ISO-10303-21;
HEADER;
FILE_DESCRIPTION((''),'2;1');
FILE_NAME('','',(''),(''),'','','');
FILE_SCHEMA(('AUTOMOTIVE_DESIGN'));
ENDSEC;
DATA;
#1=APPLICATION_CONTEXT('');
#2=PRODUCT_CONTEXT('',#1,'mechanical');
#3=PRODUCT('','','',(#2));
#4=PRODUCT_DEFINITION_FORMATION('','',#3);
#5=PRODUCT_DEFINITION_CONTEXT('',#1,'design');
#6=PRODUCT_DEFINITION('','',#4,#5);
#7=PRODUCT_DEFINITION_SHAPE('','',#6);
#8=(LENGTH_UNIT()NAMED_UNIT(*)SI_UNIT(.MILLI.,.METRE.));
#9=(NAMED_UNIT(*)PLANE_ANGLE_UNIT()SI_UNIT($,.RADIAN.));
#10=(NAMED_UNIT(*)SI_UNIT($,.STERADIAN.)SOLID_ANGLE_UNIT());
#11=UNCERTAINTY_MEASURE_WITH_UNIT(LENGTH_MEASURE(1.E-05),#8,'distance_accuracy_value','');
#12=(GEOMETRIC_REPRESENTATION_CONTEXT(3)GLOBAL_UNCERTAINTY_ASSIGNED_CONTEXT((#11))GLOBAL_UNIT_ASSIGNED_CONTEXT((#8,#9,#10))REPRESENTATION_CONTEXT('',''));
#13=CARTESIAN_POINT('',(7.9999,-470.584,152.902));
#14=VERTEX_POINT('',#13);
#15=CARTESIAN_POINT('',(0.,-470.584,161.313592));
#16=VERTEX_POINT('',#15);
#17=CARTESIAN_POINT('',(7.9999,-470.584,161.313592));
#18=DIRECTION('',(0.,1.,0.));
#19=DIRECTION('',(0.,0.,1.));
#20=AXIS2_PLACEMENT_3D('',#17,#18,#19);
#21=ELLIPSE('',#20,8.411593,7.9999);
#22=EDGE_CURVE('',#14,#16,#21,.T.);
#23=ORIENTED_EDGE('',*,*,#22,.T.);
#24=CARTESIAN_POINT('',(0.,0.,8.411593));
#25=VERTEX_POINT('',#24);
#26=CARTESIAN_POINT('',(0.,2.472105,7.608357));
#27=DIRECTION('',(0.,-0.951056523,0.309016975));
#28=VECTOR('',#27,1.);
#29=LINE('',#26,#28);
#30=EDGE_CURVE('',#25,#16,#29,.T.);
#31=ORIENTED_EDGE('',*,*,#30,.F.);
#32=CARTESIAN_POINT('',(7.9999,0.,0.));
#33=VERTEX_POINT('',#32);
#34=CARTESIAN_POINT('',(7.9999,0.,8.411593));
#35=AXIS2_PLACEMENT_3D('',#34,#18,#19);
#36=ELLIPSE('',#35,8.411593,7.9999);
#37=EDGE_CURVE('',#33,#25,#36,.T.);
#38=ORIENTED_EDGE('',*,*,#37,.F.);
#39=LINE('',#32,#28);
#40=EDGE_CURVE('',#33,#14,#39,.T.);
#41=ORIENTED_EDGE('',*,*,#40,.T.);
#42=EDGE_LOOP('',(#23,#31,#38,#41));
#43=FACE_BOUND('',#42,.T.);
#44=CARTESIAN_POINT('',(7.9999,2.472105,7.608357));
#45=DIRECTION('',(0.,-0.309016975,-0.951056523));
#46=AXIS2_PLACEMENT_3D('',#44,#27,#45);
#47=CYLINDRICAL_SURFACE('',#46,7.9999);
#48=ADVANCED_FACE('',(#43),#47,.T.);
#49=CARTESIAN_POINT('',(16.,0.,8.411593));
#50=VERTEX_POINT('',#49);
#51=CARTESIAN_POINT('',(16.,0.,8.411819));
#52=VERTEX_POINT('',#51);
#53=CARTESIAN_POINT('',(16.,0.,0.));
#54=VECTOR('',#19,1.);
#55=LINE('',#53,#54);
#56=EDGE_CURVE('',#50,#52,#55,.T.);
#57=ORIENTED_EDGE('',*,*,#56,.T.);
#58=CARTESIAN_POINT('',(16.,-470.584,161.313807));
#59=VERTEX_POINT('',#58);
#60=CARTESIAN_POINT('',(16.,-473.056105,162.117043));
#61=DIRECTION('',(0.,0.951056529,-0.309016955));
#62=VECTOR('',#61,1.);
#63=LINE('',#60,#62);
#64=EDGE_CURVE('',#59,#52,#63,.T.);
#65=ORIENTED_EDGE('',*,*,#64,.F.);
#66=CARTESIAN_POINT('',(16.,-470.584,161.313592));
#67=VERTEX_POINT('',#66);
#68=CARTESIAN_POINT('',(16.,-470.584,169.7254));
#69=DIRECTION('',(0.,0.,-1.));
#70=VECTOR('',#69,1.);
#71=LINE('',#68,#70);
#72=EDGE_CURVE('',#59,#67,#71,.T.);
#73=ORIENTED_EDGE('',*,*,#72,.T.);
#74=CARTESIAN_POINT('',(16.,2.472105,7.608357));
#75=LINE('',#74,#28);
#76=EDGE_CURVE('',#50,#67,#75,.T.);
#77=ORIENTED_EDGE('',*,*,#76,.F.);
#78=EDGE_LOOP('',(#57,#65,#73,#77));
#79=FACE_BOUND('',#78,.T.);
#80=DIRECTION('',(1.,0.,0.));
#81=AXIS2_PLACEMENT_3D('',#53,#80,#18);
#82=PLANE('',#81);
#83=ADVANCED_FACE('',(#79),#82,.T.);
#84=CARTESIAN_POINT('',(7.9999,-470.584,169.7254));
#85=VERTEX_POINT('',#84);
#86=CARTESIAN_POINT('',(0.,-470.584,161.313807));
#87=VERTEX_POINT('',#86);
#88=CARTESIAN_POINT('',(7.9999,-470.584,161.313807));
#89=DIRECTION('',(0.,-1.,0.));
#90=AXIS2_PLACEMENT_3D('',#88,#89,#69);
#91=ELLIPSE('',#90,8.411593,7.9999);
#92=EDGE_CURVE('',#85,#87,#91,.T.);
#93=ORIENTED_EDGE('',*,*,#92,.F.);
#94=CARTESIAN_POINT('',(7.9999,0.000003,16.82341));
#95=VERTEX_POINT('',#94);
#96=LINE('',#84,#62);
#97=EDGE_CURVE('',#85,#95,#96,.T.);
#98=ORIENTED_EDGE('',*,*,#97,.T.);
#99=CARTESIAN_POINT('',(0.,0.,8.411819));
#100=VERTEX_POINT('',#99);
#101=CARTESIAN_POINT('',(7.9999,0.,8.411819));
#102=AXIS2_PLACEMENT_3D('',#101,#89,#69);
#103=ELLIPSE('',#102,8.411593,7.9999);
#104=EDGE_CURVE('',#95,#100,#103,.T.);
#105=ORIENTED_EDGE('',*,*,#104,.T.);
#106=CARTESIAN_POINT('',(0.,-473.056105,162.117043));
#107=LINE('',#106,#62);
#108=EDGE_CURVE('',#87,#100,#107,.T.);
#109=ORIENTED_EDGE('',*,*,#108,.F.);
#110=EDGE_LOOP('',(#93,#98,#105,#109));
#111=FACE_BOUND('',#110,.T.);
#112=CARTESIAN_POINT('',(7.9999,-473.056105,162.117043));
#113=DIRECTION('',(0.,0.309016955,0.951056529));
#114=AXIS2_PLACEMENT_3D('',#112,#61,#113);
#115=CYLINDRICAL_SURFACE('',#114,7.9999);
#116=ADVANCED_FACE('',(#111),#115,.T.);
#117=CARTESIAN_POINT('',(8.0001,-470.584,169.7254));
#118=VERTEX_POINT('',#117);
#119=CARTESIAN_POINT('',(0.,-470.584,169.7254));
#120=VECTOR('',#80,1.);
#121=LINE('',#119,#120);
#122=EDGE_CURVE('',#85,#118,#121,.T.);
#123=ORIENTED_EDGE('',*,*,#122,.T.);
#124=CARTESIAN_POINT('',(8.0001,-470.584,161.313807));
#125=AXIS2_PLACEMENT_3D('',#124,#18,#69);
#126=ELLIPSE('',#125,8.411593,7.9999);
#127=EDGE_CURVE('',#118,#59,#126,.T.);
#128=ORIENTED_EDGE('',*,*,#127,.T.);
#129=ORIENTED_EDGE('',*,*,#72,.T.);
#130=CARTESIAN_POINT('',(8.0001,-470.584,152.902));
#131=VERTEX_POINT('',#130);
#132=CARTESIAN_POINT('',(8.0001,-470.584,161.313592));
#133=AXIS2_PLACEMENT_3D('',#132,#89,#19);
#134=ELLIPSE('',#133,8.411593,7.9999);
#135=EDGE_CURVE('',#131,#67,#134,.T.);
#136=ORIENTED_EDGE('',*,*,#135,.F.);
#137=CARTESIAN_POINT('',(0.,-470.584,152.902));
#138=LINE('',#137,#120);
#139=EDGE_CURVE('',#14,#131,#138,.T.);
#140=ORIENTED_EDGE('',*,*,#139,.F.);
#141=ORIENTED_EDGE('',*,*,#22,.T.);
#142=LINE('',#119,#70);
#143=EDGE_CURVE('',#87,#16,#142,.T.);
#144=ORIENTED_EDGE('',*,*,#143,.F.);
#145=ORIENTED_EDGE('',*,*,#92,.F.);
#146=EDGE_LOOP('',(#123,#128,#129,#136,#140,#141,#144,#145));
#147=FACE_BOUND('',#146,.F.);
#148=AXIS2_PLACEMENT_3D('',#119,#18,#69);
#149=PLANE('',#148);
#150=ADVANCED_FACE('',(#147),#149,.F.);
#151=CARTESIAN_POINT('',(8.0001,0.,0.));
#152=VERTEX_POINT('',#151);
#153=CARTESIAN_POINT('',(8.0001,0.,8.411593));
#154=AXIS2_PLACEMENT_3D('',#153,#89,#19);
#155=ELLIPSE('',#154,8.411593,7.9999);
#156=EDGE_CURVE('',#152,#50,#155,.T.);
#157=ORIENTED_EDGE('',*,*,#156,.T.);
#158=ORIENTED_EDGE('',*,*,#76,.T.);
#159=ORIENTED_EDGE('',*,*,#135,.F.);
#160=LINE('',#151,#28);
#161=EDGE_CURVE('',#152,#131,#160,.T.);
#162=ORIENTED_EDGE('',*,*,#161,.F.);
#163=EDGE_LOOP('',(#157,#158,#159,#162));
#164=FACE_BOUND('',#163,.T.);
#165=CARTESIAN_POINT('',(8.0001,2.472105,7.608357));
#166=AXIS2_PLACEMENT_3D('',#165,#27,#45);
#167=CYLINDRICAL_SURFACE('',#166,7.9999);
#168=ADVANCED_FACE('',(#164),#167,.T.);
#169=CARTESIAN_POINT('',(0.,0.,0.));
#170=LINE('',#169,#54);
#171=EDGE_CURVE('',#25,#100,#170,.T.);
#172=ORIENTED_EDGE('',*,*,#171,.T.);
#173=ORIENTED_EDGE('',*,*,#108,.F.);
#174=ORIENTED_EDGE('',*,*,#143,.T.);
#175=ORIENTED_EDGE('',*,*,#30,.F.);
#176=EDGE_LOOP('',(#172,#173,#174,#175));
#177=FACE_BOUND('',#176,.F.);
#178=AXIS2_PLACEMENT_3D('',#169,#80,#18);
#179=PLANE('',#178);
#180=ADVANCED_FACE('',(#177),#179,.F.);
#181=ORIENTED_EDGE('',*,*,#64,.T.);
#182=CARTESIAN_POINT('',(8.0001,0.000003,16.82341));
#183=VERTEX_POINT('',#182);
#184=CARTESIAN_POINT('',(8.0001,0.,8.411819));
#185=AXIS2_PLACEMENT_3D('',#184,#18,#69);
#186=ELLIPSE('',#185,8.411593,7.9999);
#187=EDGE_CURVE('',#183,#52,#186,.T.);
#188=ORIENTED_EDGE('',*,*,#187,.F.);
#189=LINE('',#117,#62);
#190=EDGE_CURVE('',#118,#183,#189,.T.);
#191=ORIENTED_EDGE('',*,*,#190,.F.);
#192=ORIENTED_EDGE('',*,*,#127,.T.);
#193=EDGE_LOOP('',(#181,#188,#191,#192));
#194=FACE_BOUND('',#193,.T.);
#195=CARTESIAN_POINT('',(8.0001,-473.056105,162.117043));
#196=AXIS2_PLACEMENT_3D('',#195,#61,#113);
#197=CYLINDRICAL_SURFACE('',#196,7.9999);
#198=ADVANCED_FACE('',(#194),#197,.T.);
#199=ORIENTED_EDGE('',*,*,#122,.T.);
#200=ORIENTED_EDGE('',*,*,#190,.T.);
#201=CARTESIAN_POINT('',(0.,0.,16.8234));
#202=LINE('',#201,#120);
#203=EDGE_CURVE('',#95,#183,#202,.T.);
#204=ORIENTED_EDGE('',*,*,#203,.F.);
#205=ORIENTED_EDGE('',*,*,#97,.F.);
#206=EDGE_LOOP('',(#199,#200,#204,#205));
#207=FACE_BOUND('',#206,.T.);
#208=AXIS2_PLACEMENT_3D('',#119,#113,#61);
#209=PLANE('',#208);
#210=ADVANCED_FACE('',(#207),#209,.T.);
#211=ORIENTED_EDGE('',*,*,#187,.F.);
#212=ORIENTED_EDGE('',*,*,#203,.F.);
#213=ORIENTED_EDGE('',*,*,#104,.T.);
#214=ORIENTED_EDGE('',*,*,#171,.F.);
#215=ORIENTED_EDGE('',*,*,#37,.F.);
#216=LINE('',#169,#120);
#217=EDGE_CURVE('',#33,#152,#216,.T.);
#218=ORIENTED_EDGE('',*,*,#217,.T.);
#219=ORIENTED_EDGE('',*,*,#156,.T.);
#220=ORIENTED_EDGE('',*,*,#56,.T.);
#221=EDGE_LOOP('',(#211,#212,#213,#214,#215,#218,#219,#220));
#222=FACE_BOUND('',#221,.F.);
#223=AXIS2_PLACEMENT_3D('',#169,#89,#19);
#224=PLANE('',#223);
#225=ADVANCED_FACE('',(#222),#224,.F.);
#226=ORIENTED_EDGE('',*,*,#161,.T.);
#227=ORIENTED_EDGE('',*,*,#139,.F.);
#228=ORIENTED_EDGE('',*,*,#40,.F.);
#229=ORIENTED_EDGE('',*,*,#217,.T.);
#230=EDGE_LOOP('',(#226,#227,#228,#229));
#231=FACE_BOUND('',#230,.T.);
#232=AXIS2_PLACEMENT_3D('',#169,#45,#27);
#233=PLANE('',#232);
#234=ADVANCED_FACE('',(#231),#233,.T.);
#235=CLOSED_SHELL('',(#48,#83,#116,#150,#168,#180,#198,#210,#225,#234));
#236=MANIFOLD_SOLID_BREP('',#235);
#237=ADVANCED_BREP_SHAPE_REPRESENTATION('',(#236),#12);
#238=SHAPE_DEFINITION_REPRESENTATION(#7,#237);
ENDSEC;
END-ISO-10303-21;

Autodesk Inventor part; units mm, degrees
ref_plane "YZ Plane" through (0, 0, 0) normal (1, 0, 0) x (0, 1, 0)
ref_plane "XZ Plane" through (0, 0, 0) normal (0, 1, 0) x (-1, 0, 0)
ref_plane "XY Plane" through (0, 0, 0) normal (0, 0, 1) x (1, 0, 0)
sketch "Sketch1" plane through (0, 0, 0) normal (1, 0, 0) x (0, 1, 0)
  line L0 (0, 0) -> (-475.5283, 154.5085)
  line L1 (0, 0) -> (500, 0) construction
  line L2 (-470.584, 169.7254) -> (2.5342, 16)
  line L3 (2.5342, 16) -> (500, 16)
  line L4 (0, 0) -> (0, 16.8234)
  line L5 (-470.584, 169.7254) -> (-470.584, 152.902)
  dimension "d0" = 500
  dimension "d1" = 162
  dimension "d2" = 16
extrude "Extrusion1" add sketch "Sketch1" along normal blind 16
fillet "Fillet1" radius 8 4 edges at (16, -235.292, 76.451) (0, -235.292, 76.451) (16, -235.292, 93.2744) (0, -235.292, 93.2744)
properties part number "Leg_Mockup"
